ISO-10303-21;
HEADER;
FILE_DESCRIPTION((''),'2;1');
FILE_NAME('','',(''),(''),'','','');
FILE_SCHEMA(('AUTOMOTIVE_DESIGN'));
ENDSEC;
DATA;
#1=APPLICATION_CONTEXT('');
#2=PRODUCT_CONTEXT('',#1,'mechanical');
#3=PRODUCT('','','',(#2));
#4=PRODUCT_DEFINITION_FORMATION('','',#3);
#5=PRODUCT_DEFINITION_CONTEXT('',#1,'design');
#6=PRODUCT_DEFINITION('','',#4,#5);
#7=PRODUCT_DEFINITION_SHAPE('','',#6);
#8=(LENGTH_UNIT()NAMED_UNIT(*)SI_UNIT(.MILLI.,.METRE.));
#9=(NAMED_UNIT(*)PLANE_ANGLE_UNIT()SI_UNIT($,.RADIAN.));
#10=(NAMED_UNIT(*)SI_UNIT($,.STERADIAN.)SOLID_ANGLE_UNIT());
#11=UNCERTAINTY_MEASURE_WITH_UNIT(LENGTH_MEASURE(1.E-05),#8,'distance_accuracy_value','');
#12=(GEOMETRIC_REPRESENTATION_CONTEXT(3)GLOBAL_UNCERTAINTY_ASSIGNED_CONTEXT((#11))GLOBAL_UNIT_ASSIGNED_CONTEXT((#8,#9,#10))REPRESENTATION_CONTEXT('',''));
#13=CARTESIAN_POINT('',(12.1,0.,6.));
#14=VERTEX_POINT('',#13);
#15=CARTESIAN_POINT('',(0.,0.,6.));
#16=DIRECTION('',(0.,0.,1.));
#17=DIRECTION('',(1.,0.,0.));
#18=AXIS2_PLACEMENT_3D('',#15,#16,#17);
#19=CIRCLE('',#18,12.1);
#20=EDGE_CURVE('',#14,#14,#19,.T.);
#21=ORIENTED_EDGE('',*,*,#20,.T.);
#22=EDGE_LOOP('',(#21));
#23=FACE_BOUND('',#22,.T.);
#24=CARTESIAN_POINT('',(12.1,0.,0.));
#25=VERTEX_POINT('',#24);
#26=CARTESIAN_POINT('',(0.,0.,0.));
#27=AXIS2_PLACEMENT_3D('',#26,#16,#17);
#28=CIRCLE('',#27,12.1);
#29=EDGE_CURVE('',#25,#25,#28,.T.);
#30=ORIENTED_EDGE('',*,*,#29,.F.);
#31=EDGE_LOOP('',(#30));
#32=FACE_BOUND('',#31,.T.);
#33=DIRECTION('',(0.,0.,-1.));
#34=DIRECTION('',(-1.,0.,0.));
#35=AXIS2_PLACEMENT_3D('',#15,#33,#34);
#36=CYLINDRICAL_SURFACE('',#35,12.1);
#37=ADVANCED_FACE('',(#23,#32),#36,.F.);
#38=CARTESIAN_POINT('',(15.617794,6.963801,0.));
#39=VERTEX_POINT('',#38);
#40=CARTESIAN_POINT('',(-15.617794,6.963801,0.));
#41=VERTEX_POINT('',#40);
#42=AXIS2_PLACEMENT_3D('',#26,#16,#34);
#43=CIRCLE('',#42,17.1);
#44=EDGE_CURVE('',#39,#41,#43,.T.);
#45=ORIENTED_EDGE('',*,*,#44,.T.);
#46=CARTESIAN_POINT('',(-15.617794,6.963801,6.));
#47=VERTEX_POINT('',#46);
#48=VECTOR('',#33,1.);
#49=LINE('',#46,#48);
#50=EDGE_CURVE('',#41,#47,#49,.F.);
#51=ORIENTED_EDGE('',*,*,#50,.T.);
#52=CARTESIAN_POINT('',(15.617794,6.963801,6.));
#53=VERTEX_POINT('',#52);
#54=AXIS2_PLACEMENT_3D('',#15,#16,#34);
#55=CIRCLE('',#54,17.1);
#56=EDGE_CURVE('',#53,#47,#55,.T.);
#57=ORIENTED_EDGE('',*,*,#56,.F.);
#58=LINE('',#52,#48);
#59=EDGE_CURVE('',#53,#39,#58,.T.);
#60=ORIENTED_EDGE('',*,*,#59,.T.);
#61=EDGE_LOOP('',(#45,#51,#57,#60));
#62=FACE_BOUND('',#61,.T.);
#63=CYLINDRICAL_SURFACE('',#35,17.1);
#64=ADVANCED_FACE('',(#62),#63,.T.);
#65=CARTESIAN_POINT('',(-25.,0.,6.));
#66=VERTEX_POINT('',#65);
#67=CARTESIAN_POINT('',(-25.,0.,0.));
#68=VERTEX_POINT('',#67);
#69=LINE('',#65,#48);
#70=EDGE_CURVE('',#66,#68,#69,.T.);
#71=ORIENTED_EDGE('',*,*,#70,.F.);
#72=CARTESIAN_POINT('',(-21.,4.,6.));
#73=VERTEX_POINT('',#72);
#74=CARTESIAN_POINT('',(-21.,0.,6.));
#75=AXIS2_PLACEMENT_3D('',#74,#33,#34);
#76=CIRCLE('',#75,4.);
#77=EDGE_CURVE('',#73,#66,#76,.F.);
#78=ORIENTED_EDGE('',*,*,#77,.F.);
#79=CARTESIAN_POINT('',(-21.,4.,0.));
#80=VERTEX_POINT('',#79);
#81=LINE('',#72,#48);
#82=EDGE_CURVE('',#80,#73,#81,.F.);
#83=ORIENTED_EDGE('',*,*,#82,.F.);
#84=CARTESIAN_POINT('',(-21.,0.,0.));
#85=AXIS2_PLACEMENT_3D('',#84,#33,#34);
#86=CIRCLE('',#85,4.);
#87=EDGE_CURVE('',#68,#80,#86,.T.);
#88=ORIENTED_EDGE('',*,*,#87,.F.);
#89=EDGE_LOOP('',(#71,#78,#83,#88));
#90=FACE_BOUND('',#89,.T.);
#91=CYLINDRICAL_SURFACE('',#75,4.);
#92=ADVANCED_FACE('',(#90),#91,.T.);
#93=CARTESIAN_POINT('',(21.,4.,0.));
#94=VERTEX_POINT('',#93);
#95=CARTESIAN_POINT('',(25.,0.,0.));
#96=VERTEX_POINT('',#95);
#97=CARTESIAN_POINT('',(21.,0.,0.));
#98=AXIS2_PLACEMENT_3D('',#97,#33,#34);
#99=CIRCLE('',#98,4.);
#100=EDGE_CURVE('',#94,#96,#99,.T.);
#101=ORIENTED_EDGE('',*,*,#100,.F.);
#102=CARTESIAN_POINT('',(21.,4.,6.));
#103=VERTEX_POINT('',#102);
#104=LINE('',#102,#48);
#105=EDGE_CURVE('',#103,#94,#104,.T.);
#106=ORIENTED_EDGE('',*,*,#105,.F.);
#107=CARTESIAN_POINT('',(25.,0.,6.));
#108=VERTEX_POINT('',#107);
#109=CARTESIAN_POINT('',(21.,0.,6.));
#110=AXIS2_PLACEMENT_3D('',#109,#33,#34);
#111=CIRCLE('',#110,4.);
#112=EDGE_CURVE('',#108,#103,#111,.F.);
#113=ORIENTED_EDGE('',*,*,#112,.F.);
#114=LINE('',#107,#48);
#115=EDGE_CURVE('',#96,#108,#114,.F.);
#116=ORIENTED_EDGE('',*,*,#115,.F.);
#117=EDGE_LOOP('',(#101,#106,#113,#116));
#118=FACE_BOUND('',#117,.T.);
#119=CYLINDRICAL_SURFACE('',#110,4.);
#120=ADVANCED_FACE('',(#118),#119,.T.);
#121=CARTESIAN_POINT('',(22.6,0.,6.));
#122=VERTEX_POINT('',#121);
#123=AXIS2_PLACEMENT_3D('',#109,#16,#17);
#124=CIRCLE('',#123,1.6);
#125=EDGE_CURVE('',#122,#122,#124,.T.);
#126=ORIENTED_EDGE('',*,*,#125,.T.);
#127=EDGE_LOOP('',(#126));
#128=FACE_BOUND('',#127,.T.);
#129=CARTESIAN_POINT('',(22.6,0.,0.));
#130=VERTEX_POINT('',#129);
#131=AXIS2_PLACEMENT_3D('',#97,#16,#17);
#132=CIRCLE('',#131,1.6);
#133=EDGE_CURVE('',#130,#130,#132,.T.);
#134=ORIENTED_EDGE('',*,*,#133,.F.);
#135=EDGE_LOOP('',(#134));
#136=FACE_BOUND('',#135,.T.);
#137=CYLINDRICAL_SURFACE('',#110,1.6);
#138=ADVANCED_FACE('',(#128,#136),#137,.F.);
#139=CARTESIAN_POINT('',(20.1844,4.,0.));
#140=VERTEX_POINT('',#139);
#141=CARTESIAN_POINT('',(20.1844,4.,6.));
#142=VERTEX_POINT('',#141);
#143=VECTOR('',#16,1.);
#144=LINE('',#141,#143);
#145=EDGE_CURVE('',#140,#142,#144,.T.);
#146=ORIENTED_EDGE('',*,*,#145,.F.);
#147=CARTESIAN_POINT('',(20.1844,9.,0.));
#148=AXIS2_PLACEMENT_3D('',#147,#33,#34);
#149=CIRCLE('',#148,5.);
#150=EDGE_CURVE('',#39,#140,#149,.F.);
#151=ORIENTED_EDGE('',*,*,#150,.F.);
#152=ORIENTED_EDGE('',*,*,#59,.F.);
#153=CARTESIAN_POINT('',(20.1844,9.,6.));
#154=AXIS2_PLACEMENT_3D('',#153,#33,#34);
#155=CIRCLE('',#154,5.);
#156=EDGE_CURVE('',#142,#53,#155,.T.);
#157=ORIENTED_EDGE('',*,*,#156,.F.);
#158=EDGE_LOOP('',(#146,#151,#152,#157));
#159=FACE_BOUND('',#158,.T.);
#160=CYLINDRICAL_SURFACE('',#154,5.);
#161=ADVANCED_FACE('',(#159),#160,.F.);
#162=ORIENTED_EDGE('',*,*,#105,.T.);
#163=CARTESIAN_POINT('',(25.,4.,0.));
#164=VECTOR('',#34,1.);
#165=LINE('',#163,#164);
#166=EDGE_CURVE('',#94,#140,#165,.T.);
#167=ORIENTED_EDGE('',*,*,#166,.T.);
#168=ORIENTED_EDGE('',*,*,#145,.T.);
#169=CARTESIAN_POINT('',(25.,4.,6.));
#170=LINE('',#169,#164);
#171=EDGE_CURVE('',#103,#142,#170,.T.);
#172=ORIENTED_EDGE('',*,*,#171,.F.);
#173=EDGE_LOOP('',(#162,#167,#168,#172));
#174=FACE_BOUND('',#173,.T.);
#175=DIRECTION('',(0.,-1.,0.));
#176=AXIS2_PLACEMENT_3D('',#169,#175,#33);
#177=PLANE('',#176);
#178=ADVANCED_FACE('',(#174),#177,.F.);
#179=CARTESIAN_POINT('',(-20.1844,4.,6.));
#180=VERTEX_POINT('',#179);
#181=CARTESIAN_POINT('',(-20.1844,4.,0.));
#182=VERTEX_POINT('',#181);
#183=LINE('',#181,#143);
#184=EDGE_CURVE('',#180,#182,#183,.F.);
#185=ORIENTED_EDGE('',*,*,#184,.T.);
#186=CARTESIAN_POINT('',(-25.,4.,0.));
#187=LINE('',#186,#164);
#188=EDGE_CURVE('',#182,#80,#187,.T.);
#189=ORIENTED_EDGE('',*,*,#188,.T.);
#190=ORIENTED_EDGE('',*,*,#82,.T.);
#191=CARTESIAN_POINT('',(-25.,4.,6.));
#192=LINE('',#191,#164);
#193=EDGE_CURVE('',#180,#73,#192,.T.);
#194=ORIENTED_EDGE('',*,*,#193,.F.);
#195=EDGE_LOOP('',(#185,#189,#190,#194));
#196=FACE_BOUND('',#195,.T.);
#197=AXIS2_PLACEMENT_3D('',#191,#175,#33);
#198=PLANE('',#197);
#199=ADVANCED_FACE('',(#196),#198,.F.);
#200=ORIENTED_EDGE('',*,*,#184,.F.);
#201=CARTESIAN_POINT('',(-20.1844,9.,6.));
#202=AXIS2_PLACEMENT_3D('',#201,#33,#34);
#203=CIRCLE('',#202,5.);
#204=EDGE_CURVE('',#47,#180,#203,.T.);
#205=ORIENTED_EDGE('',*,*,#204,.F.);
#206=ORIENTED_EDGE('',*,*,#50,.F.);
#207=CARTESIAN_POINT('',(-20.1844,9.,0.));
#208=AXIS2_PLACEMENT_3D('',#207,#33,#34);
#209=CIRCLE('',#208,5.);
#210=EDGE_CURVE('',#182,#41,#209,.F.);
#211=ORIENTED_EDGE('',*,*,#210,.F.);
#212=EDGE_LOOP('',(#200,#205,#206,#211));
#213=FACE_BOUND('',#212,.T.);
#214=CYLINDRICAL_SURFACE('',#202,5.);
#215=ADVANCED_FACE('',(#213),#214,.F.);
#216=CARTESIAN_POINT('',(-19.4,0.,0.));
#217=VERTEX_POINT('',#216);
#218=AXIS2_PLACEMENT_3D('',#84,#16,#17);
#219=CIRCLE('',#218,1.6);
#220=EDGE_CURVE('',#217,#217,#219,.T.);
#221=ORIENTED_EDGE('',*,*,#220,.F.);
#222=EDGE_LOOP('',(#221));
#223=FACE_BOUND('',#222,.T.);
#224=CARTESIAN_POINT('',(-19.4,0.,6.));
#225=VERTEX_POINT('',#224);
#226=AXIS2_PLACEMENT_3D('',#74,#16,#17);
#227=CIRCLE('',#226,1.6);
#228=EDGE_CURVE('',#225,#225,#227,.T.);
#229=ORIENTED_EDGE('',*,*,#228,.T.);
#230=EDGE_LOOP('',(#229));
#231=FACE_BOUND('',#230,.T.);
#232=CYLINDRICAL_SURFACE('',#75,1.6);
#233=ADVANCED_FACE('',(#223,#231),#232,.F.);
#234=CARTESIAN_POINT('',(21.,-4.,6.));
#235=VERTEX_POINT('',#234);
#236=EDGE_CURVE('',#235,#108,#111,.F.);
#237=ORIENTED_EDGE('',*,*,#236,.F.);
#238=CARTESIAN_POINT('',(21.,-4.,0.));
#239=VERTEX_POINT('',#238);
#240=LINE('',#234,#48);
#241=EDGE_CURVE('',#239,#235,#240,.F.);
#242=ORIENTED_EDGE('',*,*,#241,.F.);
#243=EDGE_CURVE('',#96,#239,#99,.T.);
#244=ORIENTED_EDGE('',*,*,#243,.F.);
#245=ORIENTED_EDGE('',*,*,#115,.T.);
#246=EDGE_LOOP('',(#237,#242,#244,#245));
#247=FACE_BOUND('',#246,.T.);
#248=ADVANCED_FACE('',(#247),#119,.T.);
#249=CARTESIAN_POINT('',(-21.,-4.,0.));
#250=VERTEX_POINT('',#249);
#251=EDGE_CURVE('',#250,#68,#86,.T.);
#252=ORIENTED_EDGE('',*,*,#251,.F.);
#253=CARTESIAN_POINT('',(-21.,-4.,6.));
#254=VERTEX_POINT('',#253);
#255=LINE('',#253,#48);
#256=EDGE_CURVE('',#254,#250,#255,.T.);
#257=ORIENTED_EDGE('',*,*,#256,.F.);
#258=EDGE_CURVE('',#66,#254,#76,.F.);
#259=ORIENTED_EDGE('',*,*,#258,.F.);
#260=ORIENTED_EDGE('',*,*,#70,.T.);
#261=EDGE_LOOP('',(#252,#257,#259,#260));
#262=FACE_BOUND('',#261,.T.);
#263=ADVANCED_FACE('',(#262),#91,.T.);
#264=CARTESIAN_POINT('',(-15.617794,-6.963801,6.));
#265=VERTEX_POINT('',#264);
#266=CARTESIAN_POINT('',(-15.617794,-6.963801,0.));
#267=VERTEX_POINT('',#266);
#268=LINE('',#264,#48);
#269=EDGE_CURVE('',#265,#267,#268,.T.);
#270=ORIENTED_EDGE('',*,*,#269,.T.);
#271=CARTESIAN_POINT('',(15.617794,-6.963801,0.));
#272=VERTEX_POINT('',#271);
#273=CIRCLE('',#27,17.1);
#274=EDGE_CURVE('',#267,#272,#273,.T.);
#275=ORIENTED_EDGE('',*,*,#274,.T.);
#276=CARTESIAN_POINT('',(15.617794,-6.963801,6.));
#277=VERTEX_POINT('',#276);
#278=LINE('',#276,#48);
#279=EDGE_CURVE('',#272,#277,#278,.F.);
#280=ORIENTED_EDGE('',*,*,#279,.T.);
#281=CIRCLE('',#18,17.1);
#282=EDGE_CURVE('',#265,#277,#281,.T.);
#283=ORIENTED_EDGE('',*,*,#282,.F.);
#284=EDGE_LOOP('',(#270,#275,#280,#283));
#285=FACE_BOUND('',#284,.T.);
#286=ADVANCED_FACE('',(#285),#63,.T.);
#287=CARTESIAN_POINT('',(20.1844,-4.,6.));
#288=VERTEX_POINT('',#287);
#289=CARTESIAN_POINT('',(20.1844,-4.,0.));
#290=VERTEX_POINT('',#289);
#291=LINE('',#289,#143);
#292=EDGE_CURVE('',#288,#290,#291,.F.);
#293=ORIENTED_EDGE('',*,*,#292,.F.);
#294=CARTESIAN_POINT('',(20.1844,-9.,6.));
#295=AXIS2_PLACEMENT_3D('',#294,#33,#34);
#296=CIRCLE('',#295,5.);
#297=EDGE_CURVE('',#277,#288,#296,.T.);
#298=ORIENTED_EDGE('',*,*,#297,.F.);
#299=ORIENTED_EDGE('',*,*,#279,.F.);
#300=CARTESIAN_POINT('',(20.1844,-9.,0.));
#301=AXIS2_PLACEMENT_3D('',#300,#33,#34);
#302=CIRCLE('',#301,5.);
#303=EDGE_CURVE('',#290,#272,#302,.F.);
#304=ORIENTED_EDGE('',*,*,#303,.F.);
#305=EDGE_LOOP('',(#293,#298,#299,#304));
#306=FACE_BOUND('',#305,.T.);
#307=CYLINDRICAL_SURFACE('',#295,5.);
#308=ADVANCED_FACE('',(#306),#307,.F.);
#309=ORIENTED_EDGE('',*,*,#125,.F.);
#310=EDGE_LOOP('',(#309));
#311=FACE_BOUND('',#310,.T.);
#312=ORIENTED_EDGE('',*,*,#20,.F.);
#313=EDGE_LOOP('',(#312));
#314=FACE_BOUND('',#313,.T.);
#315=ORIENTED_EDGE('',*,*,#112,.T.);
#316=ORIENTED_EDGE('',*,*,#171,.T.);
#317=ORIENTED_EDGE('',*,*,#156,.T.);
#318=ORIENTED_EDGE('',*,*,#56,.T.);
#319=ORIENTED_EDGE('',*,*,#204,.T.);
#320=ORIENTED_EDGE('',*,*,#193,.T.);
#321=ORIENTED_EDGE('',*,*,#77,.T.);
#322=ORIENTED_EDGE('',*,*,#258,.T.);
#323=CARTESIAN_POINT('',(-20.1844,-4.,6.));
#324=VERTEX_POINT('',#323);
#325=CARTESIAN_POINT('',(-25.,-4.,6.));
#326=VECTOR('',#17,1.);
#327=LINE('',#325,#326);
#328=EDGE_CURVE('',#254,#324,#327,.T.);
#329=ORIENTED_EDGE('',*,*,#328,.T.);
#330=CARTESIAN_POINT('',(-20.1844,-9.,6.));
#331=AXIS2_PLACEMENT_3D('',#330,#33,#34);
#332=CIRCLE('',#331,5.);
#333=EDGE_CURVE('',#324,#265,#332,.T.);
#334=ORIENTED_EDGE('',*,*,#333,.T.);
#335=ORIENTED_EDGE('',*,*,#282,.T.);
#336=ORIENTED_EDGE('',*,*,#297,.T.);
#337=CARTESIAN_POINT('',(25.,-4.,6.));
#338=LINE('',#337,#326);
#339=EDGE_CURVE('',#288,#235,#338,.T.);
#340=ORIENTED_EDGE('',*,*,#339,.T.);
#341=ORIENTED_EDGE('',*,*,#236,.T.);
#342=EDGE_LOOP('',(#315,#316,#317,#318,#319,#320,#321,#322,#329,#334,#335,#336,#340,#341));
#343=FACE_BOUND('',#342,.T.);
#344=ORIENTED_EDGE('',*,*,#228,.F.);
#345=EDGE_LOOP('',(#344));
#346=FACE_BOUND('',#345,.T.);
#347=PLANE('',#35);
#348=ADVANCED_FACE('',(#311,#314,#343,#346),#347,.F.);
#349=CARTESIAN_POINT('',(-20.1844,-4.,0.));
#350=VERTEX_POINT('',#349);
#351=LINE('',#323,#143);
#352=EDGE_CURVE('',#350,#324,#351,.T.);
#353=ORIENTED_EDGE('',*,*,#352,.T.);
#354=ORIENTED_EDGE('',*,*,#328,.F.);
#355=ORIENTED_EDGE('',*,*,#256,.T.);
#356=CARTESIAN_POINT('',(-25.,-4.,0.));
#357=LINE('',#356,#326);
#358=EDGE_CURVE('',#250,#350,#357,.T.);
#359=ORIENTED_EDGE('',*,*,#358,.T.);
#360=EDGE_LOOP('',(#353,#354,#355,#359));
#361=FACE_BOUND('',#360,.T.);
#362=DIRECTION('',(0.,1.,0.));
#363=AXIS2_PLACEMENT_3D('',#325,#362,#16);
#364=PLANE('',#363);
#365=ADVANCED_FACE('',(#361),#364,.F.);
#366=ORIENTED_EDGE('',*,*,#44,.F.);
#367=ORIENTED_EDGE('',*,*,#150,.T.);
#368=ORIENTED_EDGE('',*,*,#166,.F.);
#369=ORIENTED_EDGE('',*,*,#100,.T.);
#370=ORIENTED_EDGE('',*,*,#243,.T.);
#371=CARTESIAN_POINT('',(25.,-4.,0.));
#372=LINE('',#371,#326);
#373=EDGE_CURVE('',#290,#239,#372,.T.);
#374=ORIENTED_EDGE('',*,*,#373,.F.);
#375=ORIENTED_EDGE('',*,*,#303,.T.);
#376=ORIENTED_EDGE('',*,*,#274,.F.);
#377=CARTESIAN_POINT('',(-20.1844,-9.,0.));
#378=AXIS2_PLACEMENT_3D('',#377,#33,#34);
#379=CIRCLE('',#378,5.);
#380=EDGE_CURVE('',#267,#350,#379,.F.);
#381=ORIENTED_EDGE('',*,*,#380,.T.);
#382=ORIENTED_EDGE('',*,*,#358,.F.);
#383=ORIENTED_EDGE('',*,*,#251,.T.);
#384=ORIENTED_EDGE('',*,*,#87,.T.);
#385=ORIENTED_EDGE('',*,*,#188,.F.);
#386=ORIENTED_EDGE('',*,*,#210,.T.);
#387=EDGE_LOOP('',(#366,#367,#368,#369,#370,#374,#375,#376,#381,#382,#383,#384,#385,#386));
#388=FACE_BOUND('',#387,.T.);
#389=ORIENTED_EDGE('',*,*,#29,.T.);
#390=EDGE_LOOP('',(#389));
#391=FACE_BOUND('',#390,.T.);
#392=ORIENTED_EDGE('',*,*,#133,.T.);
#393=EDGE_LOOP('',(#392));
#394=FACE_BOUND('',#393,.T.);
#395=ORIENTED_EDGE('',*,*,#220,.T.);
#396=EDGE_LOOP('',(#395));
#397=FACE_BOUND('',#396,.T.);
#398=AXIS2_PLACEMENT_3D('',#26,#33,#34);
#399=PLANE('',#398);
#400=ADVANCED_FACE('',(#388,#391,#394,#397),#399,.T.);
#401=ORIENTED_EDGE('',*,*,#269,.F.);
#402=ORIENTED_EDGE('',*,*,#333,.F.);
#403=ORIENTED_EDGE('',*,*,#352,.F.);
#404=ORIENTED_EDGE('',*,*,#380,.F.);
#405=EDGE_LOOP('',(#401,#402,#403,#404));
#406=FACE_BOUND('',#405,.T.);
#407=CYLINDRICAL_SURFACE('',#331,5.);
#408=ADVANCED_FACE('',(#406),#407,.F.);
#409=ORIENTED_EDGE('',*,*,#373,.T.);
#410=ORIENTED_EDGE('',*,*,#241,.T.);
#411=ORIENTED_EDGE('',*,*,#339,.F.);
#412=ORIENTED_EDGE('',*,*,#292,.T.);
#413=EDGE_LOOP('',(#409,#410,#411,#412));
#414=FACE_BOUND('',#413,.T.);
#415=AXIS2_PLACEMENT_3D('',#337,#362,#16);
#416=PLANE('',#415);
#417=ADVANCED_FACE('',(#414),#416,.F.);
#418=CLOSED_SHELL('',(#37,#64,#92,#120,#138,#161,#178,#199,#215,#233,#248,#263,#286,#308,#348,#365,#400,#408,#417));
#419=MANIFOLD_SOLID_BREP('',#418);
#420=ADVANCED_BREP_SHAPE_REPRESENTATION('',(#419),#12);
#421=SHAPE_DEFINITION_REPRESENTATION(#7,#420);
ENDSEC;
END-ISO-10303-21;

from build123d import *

# Parameters (mm, degrees)
ESBO_O1_R                = 12.1
ESBO_O1_R_2              = 1.6
RESSALTO_EXTRUS_O1_DEPTH = 6
FILETE2_R                = 5
FILETE3_R                = 4


with BuildPart() as part:
    # Esboço1 → Ressalto-extrusão1 (new body)
    with BuildSketch(Plane.XY):
        with BuildLine():
            Line((-25, 4), (-16.625582697, 4))
            ThreePointArc((-16.625582697, 4), (0, 17.1), (16.625582697, 4))
            Line((16.625582697, 4), (25, 4))
            Line((25, 4), (25, -4))
            Line((25, -4), (16.625582697, -4))
            ThreePointArc((16.625582697, -4), (0, -17.1), (-16.625582697, -4))
            Line((-16.625582697, -4), (-25, -4))
            Line((-25, -4), (-25, 4))
        make_face()
        Circle(ESBO_O1_R, mode=Mode.SUBTRACT)
        with Locations((-21, 0)):
            Circle(ESBO_O1_R_2, mode=Mode.SUBTRACT)
        with Locations((21, 0)):
            Circle(ESBO_O1_R_2, mode=Mode.SUBTRACT)
    extrude(amount=RESSALTO_EXTRUS_O1_DEPTH)

    # Filete2
    filete2_edges = [part.edges().sort_by_distance(p)[0] for p in [
        (-16.625582697, 4, 3),
        (16.625582697, 4, 3),
        (16.625582697, -4, 3),
        (-16.625582697, -4, 3),
    ]]
    fillet(filete2_edges, radius=FILETE2_R)

    # Filete3
    filete3_edges = [part.edges().sort_by_distance(p)[0] for p in [
        (25, -4, 3),
        (25, 4, 3),
        (-25, -4, 3),
        (-25, 4, 3),
    ]]
    fillet(filete3_edges, radius=FILETE3_R - 0.0001)  # a hair under: the kernel refuses the full size


solid = part.part
